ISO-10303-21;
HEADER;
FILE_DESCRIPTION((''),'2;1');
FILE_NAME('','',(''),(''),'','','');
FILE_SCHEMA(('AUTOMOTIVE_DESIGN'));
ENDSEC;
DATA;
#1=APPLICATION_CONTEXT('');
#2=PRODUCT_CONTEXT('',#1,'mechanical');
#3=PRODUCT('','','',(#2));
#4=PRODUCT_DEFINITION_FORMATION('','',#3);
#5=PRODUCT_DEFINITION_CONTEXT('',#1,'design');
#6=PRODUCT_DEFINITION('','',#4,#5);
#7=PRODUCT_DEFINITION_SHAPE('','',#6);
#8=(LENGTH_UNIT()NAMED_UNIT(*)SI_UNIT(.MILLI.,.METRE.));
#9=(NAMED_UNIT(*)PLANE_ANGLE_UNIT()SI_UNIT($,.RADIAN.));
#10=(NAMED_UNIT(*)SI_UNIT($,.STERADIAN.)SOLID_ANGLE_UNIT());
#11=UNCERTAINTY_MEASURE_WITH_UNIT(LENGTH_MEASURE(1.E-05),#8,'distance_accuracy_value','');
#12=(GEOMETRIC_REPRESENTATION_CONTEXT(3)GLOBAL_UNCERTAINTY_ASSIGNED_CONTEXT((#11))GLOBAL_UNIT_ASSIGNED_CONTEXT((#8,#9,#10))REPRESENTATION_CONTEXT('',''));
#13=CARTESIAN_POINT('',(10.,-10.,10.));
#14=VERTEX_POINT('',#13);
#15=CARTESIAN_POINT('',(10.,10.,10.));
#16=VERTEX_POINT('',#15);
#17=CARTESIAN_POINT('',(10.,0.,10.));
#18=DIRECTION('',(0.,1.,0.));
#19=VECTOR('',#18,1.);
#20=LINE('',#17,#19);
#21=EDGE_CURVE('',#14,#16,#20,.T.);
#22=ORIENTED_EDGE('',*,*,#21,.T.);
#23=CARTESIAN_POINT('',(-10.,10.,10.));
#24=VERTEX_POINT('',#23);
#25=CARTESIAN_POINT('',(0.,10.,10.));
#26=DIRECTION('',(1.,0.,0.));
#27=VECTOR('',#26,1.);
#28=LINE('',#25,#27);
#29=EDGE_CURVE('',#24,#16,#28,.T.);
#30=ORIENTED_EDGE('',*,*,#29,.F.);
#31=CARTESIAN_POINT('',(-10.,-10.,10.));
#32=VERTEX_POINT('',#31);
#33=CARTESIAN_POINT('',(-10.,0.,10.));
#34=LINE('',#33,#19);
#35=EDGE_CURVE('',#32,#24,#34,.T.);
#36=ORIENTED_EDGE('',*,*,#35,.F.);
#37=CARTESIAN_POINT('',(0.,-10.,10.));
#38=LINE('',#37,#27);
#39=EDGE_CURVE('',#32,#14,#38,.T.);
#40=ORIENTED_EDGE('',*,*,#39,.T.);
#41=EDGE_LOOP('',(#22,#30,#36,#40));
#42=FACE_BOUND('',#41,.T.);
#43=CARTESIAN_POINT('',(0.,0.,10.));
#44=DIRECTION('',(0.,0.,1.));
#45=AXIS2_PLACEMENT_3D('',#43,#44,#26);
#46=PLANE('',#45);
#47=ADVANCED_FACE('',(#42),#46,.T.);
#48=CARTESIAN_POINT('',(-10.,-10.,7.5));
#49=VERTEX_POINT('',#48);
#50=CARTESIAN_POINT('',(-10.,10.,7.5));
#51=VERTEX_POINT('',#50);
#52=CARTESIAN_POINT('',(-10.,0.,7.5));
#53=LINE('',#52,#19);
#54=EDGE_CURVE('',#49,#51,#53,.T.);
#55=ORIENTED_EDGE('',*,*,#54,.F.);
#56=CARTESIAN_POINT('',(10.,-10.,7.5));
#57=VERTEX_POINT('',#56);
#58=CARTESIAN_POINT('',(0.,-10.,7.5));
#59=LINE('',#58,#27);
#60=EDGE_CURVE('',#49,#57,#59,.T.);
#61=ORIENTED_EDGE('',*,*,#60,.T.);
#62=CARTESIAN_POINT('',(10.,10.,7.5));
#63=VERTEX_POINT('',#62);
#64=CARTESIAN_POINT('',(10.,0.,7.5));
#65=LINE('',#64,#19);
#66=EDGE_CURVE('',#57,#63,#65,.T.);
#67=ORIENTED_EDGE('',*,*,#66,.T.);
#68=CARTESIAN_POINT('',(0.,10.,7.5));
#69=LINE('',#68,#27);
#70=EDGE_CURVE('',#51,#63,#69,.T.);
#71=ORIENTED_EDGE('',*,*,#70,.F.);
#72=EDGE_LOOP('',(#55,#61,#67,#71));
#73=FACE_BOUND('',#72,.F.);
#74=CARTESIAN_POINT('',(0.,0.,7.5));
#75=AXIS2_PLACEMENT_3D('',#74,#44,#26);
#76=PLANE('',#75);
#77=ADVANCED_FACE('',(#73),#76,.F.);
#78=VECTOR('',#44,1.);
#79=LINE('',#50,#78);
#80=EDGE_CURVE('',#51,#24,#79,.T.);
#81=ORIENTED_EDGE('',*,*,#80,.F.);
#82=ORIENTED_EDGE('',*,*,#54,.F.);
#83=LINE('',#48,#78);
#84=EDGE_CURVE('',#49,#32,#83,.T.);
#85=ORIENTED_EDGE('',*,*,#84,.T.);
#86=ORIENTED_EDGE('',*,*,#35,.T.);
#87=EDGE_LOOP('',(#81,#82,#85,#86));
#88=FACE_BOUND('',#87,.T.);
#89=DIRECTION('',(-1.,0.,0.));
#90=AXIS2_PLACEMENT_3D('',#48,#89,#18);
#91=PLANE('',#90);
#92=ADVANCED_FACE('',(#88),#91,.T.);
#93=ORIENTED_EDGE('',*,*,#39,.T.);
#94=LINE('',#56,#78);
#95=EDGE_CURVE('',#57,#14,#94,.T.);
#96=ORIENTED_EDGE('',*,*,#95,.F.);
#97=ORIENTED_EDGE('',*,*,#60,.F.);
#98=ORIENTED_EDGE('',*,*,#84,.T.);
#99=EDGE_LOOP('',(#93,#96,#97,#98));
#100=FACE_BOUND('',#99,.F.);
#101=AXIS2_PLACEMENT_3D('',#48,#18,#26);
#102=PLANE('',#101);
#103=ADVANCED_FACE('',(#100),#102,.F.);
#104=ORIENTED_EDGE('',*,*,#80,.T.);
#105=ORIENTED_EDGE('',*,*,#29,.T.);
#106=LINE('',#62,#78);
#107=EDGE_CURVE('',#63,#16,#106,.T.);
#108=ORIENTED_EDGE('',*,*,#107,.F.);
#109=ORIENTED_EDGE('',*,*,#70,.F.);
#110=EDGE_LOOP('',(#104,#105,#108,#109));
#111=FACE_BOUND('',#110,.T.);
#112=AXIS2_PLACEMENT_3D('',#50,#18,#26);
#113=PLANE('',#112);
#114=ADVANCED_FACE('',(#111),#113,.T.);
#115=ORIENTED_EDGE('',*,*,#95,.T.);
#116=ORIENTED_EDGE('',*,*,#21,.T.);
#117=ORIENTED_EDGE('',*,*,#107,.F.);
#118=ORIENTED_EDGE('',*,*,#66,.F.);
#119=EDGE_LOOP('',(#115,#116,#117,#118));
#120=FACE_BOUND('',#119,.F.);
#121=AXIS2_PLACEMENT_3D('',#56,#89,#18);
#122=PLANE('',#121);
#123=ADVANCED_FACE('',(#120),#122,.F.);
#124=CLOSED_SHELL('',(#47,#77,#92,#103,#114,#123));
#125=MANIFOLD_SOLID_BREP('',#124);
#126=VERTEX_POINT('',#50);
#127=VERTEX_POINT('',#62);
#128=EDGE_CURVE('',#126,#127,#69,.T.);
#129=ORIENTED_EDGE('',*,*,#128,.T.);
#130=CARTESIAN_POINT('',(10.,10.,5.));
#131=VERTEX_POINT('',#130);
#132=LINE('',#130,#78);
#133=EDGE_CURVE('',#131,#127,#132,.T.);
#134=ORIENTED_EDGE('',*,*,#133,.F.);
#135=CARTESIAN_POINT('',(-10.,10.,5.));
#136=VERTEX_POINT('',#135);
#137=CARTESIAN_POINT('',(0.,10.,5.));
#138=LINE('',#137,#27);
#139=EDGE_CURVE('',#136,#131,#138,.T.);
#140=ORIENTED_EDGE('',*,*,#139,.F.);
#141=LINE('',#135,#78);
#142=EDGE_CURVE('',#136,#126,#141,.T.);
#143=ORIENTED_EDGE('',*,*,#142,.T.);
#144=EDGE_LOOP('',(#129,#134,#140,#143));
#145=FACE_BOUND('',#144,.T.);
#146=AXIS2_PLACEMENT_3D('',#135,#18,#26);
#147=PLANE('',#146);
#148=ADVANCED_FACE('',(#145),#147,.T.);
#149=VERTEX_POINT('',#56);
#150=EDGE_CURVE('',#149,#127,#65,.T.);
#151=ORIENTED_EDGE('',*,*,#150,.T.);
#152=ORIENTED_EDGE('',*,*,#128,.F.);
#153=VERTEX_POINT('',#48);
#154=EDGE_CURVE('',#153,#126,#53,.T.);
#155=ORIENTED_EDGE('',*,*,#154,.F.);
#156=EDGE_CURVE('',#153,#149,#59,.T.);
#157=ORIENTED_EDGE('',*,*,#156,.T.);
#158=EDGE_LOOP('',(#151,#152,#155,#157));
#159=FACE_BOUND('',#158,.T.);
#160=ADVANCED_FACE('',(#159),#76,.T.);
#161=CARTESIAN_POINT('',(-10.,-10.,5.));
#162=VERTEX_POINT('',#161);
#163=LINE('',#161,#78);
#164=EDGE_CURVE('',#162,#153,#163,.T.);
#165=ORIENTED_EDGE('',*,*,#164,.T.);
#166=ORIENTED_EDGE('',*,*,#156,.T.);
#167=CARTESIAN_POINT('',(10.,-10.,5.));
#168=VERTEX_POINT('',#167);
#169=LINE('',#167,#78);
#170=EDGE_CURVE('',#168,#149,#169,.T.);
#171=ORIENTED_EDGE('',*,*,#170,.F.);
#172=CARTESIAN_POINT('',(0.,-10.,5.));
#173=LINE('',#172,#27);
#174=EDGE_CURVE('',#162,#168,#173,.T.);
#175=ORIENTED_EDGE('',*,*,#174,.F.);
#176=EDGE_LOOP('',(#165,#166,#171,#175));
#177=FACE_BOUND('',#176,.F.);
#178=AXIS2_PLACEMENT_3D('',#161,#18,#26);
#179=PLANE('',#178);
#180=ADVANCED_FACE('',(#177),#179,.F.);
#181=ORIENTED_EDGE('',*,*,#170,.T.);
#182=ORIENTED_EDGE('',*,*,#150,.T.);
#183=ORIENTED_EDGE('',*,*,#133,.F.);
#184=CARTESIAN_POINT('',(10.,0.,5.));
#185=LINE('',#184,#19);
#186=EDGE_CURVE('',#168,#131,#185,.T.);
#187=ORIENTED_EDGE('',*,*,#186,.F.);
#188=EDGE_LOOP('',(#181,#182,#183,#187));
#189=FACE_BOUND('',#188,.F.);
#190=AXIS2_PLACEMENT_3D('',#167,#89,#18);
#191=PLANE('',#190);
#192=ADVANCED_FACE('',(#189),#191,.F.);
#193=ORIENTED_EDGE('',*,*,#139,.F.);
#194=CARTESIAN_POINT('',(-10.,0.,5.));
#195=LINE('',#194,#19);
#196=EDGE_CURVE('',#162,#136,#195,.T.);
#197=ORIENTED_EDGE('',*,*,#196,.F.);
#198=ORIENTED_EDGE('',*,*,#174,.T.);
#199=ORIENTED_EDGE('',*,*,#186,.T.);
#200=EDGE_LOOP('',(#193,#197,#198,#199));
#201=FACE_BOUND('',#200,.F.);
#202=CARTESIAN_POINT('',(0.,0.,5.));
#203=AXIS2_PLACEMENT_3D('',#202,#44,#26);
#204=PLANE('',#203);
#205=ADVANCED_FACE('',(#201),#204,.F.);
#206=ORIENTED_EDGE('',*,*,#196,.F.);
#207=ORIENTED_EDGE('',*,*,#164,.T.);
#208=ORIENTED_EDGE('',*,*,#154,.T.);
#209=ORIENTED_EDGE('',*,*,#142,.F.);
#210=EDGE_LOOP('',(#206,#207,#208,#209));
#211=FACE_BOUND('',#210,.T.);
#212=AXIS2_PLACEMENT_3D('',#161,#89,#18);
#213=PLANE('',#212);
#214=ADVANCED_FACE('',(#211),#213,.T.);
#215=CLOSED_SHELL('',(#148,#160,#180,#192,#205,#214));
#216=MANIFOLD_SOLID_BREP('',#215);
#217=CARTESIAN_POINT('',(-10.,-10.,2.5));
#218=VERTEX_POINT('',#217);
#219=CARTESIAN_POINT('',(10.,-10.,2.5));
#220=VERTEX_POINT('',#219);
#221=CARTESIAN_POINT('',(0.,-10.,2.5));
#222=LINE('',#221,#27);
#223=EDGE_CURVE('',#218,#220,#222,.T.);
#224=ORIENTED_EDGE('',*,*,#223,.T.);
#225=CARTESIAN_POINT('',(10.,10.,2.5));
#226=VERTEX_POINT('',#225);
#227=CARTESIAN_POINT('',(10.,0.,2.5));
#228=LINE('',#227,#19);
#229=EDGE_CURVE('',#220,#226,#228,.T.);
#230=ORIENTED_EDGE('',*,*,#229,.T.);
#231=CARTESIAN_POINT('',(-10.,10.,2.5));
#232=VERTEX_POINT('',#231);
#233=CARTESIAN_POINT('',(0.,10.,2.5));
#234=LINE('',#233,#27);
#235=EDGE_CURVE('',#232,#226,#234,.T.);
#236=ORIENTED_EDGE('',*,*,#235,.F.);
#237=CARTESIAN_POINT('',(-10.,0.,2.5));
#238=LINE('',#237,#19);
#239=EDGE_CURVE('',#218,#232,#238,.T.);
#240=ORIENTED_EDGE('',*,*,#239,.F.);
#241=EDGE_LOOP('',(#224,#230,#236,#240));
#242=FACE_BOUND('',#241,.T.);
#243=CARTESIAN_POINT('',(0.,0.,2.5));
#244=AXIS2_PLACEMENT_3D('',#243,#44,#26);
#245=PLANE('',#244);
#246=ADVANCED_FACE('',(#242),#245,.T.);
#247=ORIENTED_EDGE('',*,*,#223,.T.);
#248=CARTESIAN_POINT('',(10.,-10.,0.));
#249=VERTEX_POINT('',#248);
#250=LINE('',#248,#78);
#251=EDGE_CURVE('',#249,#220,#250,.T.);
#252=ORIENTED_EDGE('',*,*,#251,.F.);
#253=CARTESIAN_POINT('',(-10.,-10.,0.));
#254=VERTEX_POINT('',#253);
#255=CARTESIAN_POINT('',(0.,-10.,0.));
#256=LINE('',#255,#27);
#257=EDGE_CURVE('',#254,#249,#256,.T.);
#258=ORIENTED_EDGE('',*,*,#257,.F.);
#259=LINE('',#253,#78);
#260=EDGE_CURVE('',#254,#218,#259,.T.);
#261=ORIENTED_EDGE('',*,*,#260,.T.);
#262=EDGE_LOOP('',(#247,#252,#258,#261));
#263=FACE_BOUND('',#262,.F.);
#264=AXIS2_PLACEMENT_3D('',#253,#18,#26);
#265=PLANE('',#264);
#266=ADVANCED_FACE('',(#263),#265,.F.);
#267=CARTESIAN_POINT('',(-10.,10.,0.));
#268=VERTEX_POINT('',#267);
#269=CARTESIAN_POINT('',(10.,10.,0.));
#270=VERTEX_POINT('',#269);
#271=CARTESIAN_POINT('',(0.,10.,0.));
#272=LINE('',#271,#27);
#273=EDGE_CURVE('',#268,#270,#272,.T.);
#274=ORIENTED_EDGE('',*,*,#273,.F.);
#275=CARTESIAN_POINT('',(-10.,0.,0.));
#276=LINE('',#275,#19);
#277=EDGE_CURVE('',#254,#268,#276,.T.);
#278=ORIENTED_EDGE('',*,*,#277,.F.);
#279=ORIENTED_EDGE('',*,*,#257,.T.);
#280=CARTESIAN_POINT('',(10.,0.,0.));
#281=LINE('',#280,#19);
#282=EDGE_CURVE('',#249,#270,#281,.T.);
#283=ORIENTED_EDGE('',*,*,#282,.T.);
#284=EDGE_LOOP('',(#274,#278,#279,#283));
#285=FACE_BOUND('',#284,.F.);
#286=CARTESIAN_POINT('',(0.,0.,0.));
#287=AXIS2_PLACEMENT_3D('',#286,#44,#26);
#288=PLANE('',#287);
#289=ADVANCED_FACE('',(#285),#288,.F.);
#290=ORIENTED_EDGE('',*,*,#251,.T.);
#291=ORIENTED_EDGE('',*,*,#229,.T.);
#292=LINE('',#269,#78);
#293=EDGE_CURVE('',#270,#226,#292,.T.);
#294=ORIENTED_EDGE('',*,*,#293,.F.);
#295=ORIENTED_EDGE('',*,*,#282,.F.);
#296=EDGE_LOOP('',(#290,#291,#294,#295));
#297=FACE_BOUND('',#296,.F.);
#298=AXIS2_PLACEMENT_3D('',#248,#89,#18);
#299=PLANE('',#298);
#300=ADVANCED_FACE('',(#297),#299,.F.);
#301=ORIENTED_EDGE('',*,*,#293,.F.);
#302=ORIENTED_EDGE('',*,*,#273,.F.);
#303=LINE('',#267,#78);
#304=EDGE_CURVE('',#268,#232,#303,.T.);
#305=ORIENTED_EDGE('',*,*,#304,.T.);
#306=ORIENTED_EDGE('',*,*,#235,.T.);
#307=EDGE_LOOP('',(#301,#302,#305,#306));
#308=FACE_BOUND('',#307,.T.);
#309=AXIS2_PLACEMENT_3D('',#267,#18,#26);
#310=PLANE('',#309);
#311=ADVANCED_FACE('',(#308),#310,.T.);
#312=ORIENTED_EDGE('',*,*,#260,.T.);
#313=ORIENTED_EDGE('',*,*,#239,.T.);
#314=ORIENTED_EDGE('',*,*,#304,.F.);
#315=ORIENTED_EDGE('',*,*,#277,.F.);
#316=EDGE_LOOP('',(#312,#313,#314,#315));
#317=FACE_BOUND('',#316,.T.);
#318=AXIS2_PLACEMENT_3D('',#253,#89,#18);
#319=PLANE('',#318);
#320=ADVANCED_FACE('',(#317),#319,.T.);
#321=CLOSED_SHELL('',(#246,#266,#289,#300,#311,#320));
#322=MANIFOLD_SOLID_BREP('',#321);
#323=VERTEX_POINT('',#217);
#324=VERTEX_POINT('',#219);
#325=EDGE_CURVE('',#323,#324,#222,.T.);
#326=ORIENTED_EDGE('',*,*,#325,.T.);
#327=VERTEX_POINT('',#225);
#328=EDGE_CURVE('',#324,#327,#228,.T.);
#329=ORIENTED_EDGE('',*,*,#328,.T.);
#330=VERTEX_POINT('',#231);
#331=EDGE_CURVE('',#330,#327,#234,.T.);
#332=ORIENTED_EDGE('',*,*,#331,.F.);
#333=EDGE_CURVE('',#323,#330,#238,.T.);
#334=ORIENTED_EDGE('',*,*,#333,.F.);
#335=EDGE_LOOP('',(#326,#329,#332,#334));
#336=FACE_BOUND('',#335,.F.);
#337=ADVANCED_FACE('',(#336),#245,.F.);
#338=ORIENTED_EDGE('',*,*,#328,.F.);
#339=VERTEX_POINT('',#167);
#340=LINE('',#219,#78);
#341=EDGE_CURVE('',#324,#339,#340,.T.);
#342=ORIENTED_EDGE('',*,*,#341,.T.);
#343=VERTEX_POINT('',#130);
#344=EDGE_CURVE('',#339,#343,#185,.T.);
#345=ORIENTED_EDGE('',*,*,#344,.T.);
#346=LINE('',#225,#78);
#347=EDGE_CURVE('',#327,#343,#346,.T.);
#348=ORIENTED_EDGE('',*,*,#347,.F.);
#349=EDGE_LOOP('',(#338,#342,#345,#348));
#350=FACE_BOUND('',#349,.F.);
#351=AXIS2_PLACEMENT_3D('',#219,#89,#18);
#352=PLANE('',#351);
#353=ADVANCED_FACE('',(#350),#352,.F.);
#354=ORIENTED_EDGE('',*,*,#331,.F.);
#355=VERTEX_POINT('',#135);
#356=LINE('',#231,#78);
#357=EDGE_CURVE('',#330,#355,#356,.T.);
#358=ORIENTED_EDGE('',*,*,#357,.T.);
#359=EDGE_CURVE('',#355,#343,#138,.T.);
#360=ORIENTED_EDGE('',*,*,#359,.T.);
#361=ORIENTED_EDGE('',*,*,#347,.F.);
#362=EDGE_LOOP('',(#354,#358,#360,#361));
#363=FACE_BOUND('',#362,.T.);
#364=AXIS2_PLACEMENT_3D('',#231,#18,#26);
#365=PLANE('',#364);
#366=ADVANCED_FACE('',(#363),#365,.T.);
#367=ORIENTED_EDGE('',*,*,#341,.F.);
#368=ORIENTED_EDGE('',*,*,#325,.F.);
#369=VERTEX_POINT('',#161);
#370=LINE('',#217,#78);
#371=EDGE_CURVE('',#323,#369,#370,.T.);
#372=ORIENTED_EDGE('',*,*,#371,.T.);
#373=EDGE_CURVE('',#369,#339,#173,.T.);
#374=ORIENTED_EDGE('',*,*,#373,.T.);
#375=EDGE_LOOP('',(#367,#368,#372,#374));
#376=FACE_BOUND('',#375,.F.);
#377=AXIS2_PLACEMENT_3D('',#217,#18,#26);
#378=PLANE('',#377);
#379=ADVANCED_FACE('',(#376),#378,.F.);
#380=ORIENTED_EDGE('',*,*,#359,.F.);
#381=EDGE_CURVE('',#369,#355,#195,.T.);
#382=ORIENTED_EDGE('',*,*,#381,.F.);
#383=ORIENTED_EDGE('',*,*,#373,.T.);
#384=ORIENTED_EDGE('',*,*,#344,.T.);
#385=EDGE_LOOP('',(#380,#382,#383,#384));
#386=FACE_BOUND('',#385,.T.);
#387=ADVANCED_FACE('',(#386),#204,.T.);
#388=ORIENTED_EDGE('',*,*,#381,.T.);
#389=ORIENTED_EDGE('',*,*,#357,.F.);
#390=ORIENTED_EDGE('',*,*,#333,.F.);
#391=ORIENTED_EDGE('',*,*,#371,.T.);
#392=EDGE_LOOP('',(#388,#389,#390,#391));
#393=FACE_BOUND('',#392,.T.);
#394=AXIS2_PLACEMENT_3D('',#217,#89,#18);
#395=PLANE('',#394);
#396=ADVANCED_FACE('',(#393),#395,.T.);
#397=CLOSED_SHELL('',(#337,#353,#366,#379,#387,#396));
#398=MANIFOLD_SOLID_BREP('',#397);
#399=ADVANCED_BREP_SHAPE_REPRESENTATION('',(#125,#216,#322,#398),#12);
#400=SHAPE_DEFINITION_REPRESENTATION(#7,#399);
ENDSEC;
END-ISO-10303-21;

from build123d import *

# Parameters (mm, degrees)
F0_W     = 20
F0_H     = 20
F1_DEPTH = 2.5
F2_DEPTH = 2.5
F3_DEPTH = 2.5
F4_DEPTH = 2.5


with BuildPart() as f1:
    # F0 (on Top) → F1 (new body)
    with BuildSketch(Plane.XY):
        Rectangle(F0_W, F0_H)
    extrude(amount=F1_DEPTH)


with BuildPart() as f2:
    # F2 (new): a face of the model
    f2_faces = [f1.part.faces().sort_by_distance(p)[0] for p in [
        (0, 0, 2.5),
    ]]
    extrude(f2_faces, amount=F2_DEPTH)


with BuildPart() as f3:
    # F3 (new): a face of the model
    f3_faces = [f2.part.faces().sort_by_distance(p)[0] for p in [
        (0, 0, 5),
    ]]
    extrude(f3_faces, amount=F3_DEPTH)


with BuildPart() as f4:
    # F4 (new): a face of the model
    f4_faces = [f3.part.faces().sort_by_distance(p)[0] for p in [
        (0, 0, 7.5),
    ]]
    extrude(f4_faces, amount=F4_DEPTH)


solid = Compound([f1.part, f2.part, f3.part, f4.part])
